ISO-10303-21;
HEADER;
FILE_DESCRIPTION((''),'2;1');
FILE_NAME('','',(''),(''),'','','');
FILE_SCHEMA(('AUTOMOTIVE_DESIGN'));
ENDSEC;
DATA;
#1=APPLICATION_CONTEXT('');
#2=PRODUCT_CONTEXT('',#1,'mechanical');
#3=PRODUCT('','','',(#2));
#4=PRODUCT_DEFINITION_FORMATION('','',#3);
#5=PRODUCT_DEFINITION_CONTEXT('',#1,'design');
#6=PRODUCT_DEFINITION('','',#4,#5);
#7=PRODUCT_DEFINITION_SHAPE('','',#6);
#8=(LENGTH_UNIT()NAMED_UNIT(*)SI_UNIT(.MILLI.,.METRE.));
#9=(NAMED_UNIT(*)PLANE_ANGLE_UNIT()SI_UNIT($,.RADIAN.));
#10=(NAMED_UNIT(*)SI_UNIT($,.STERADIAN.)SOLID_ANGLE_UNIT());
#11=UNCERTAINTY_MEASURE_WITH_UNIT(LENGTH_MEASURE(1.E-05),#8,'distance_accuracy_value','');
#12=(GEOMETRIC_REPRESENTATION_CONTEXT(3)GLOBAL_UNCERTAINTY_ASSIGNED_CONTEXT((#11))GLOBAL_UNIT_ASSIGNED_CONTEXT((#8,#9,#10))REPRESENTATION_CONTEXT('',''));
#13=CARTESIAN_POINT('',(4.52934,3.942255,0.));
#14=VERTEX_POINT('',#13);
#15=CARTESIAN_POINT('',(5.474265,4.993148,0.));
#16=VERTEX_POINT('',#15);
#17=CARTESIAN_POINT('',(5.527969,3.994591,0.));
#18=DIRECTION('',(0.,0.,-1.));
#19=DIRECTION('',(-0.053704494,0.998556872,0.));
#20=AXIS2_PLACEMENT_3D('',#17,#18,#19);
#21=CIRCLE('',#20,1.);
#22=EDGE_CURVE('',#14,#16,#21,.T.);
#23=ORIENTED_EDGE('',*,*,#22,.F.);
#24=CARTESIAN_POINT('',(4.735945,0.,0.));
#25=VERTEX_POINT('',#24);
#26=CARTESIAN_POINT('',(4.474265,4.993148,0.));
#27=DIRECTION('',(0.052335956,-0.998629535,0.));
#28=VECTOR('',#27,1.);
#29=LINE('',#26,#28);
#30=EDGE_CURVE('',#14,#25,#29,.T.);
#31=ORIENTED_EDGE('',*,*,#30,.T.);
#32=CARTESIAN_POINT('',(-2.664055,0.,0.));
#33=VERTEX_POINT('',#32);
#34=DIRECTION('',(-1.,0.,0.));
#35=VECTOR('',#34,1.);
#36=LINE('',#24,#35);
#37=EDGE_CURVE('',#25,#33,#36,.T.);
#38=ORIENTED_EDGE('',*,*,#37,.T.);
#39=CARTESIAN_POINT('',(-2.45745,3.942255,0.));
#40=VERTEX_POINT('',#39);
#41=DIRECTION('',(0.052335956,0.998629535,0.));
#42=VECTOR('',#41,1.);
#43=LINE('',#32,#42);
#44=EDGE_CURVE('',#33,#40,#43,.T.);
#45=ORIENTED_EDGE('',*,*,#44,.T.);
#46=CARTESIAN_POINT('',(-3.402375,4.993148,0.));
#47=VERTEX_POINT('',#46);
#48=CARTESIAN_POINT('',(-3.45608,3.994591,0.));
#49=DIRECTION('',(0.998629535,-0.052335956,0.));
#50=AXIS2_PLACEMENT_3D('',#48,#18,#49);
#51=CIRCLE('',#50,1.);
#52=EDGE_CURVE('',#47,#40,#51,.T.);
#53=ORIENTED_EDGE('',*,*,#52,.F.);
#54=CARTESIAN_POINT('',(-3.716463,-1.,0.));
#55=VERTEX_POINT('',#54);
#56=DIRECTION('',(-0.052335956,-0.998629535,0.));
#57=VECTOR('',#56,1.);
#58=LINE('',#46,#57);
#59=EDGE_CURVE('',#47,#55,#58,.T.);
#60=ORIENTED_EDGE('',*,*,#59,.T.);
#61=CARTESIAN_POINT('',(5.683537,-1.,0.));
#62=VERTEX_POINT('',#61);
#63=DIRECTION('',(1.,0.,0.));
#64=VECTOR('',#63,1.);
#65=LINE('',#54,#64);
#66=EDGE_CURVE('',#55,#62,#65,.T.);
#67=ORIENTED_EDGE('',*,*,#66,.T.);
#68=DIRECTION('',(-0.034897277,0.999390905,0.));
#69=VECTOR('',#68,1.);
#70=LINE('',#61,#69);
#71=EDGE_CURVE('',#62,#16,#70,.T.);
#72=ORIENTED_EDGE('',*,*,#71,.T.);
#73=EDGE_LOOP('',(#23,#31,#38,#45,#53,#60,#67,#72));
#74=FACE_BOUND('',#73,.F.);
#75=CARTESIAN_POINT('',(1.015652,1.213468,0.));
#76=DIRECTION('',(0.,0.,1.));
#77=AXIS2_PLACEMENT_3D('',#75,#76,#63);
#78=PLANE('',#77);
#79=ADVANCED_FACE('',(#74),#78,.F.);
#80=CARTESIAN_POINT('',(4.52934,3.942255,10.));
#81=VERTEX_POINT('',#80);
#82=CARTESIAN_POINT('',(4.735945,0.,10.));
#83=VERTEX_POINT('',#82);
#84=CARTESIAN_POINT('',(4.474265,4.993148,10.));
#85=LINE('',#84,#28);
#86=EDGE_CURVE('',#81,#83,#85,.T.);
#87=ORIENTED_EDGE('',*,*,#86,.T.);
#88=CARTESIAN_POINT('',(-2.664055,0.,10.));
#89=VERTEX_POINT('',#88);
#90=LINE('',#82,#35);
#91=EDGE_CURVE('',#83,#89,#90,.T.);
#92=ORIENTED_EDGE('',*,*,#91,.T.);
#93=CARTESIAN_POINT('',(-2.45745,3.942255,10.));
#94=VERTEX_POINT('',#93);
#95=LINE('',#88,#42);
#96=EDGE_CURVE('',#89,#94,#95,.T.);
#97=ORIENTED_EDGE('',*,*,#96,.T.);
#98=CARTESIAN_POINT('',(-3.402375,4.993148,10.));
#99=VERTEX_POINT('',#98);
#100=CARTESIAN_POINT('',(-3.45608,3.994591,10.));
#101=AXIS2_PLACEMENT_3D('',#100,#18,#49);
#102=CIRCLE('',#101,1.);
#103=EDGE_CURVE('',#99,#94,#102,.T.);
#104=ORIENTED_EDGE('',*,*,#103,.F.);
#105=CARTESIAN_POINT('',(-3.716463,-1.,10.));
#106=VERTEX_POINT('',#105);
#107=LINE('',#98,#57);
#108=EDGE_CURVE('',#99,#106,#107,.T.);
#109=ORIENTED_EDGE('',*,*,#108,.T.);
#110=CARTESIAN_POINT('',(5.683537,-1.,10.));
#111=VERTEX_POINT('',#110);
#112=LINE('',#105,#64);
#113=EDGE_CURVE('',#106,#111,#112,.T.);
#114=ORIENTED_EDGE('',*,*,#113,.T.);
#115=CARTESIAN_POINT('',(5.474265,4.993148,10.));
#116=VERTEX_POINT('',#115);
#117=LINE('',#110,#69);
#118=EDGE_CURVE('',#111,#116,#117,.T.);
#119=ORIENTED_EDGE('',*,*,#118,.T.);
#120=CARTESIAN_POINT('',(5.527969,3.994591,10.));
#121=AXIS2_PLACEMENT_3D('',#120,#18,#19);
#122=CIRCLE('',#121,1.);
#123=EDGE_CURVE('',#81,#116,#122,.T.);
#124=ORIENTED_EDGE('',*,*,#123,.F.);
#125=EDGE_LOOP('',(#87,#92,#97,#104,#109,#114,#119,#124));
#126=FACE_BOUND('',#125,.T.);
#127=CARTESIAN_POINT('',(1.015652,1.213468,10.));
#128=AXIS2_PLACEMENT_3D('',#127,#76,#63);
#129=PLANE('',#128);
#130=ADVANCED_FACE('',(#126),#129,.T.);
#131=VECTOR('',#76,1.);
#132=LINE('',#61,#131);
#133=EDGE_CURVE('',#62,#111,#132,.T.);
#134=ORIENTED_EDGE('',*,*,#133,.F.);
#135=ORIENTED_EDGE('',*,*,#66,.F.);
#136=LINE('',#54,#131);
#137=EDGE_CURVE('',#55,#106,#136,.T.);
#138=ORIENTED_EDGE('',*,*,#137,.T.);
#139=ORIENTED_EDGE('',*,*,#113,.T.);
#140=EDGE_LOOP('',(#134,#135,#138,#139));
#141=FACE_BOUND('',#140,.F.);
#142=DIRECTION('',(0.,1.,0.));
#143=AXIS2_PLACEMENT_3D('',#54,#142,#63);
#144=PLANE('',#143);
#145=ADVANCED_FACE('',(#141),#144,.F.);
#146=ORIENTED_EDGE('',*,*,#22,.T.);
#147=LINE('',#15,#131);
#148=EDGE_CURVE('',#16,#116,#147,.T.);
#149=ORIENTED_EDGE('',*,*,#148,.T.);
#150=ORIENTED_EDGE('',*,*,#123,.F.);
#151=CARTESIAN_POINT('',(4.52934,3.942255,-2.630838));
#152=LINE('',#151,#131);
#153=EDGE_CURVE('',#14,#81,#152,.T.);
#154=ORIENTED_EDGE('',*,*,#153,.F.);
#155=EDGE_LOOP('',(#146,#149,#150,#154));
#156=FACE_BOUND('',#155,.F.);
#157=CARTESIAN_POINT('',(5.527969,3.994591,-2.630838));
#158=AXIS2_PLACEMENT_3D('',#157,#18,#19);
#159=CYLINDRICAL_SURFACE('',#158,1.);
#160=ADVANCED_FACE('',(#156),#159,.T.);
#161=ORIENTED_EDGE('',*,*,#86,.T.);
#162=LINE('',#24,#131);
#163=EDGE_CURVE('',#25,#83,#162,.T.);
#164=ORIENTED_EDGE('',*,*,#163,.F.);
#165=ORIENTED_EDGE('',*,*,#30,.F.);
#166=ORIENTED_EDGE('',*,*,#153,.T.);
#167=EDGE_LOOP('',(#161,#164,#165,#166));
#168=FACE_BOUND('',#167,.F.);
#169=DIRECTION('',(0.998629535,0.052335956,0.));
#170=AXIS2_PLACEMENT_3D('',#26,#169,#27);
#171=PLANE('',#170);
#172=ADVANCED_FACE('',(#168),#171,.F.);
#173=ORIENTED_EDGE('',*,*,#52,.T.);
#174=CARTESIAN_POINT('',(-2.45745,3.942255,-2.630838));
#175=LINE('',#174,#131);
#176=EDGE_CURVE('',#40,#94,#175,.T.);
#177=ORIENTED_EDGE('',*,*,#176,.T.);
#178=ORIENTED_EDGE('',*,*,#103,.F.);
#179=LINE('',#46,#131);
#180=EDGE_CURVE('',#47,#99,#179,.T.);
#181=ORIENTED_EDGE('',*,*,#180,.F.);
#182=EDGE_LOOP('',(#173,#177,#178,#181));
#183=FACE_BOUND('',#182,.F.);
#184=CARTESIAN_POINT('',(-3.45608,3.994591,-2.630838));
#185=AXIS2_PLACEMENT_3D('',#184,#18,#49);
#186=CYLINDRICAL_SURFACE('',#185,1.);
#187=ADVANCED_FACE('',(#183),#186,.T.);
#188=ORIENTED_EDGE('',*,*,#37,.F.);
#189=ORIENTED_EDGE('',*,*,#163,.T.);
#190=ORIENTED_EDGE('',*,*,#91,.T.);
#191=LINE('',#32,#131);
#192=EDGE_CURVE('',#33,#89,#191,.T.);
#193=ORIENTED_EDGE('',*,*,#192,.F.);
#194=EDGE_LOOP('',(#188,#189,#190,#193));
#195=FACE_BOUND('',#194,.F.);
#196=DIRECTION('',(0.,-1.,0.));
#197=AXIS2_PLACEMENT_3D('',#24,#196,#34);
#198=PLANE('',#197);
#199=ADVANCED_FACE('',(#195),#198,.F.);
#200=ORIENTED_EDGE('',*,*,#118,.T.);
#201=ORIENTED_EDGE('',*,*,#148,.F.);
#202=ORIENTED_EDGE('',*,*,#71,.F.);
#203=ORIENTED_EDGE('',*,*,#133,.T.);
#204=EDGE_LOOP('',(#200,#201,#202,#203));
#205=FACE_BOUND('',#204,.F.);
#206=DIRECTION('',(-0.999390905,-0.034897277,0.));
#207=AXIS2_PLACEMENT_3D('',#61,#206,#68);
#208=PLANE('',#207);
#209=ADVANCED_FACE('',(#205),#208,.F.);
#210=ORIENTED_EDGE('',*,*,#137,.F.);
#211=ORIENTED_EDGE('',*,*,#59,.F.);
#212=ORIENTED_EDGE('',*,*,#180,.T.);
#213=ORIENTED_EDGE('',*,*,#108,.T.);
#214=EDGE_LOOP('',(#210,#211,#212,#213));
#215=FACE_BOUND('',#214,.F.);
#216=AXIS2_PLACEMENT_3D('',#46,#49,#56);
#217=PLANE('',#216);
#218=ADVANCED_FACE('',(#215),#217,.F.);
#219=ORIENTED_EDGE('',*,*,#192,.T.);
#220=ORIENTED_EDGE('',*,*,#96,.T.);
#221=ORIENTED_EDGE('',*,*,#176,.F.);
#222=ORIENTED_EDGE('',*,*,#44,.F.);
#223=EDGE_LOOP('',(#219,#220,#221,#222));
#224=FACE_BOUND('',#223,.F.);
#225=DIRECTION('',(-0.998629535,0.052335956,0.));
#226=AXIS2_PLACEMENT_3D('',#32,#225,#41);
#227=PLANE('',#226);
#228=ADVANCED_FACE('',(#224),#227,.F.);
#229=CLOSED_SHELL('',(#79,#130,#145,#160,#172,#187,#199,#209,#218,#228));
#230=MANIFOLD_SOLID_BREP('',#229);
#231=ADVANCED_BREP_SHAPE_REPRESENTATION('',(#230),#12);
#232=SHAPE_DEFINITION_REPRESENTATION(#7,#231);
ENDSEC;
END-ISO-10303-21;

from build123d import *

# Parameters (mm, degrees)
F1_DEPTH    = 10
F2_T1_DEPTH = 15.2616750858


# Not quite as in the source:
# - a fillet or chamfer that OpenCascade refuses, or shapes differently, is made with other operations: its cross-section is extruded or revolved along the edge and cut away or added


with BuildPart() as f1:
    # F0 (on Top) → F1 (new body)
    with BuildSketch(Plane.XY):
        Polygon((4.7359447583, 0), (-2.6640552417, 0), (-2.4023754605, 4.9931476738), (-3.4023754605, 4.9931476738), (-3.716463021, -1), (5.683536979, -1), (5.474264977, 4.9931476738), (4.474264977, 4.9931476738), align=None)
    extrude(amount=F1_DEPTH)

    # F2: fillet of radius 1 on 2 edges, made by hand

    # F2_s2 → F2_t1 (cut)
    with BuildSketch(Plane.XY.offset(-2.6308375429)):
        with BuildLine():
            ThreePointArc((5.474264977, 4.9931476738), (4.78436631, 4.6632120235), (4.5293399365, 3.9422548452))
            Line((4.5293399365, 3.9422548452), (4.474264977, 4.9931476738))
            Line((4.474264977, 4.9931476738), (5.474264977, 4.9931476738))
        make_face()
        with BuildLine():
            ThreePointArc((-2.4574504199, 3.9422548452), (-2.7124767935, 4.6632120235), (-3.4023754605, 4.9931476738))
            Line((-3.4023754605, 4.9931476738), (-2.4023754605, 4.9931476738))
            Line((-2.4023754605, 4.9931476738), (-2.4574504199, 3.9422548452))
        make_face()
    extrude(amount=F2_T1_DEPTH, mode=Mode.SUBTRACT)


solid = f1.part
